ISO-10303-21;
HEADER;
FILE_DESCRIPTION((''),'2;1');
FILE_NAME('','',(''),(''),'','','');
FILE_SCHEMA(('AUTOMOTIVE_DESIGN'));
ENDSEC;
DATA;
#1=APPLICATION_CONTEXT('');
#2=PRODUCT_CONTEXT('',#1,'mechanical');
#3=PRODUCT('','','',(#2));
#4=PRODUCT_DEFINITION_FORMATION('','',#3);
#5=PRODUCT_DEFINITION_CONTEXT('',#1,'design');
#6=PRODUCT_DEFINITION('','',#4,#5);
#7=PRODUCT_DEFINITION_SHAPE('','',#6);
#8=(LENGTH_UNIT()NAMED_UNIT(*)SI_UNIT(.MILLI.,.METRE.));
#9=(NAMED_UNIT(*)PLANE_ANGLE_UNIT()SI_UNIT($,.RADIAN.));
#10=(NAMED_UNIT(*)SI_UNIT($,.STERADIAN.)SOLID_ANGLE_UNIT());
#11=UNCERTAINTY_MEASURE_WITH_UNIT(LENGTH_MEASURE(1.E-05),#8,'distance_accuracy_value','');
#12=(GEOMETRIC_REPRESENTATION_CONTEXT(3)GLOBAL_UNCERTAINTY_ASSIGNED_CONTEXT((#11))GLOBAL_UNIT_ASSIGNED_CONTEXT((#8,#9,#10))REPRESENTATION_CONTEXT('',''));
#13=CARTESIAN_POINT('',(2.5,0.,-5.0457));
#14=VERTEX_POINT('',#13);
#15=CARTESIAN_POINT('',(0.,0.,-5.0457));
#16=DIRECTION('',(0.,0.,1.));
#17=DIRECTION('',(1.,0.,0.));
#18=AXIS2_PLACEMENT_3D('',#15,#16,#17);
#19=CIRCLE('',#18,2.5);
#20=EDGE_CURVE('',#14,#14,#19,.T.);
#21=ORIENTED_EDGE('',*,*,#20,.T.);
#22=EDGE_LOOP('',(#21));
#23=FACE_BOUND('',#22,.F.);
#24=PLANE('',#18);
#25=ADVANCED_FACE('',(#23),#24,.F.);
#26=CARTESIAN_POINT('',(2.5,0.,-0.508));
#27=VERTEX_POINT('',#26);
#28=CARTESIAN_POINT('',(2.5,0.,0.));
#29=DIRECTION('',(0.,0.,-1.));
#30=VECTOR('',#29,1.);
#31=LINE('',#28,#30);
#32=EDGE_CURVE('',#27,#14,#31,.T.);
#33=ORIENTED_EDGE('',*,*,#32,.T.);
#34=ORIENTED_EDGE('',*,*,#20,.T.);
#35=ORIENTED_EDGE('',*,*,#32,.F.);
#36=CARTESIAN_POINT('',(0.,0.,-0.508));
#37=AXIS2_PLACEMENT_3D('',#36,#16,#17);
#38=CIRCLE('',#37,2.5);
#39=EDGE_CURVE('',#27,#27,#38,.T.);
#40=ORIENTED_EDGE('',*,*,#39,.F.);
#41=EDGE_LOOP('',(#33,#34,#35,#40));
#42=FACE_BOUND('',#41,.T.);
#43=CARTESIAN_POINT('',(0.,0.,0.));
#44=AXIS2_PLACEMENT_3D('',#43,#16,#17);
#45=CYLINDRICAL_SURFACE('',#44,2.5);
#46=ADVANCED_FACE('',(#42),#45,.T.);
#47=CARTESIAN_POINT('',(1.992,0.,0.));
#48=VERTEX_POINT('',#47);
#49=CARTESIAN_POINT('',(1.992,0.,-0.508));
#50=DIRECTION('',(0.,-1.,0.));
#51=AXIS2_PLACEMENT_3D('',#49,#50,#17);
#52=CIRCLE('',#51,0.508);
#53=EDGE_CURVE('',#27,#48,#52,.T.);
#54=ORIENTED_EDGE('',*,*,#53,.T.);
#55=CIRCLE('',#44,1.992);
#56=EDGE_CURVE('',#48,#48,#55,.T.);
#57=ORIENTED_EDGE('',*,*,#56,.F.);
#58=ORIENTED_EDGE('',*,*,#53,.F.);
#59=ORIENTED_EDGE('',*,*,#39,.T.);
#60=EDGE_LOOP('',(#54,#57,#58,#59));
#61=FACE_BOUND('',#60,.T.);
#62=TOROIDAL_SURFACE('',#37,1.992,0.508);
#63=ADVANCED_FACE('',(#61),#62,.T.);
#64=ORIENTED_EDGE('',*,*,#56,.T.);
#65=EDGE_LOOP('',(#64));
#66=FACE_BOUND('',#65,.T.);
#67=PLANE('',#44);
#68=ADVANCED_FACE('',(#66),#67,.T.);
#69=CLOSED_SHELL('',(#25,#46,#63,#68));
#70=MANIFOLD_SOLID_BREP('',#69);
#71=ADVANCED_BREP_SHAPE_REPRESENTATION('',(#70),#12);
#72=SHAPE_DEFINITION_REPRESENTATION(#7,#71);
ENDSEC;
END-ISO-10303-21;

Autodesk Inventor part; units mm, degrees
ref_plane "YZ Plane" through (0, 0, 0) normal (1, 0, 0) x (0, 1, 0)
ref_plane "XZ Plane" through (0, 0, 0) normal (0, 1, 0) x (-1, 0, 0)
ref_plane "XY Plane" through (0, 0, 0) normal (0, 0, 1) x (1, 0, 0)
sketch "Sketch1" plane through (0, 0, 0) normal (0, 0, 1) x (1, 0, 0)
  circle A0 centre (0, 0) radius 2.5
  dimension "d0" = 5
extrude "Extrusion1" add sketch "Sketch1" against normal blind 5.0457
fillet "Face Fillet1" radius 0.508 1 edges at (-2.5, 0, 0)
properties part number "Mini Lights"
